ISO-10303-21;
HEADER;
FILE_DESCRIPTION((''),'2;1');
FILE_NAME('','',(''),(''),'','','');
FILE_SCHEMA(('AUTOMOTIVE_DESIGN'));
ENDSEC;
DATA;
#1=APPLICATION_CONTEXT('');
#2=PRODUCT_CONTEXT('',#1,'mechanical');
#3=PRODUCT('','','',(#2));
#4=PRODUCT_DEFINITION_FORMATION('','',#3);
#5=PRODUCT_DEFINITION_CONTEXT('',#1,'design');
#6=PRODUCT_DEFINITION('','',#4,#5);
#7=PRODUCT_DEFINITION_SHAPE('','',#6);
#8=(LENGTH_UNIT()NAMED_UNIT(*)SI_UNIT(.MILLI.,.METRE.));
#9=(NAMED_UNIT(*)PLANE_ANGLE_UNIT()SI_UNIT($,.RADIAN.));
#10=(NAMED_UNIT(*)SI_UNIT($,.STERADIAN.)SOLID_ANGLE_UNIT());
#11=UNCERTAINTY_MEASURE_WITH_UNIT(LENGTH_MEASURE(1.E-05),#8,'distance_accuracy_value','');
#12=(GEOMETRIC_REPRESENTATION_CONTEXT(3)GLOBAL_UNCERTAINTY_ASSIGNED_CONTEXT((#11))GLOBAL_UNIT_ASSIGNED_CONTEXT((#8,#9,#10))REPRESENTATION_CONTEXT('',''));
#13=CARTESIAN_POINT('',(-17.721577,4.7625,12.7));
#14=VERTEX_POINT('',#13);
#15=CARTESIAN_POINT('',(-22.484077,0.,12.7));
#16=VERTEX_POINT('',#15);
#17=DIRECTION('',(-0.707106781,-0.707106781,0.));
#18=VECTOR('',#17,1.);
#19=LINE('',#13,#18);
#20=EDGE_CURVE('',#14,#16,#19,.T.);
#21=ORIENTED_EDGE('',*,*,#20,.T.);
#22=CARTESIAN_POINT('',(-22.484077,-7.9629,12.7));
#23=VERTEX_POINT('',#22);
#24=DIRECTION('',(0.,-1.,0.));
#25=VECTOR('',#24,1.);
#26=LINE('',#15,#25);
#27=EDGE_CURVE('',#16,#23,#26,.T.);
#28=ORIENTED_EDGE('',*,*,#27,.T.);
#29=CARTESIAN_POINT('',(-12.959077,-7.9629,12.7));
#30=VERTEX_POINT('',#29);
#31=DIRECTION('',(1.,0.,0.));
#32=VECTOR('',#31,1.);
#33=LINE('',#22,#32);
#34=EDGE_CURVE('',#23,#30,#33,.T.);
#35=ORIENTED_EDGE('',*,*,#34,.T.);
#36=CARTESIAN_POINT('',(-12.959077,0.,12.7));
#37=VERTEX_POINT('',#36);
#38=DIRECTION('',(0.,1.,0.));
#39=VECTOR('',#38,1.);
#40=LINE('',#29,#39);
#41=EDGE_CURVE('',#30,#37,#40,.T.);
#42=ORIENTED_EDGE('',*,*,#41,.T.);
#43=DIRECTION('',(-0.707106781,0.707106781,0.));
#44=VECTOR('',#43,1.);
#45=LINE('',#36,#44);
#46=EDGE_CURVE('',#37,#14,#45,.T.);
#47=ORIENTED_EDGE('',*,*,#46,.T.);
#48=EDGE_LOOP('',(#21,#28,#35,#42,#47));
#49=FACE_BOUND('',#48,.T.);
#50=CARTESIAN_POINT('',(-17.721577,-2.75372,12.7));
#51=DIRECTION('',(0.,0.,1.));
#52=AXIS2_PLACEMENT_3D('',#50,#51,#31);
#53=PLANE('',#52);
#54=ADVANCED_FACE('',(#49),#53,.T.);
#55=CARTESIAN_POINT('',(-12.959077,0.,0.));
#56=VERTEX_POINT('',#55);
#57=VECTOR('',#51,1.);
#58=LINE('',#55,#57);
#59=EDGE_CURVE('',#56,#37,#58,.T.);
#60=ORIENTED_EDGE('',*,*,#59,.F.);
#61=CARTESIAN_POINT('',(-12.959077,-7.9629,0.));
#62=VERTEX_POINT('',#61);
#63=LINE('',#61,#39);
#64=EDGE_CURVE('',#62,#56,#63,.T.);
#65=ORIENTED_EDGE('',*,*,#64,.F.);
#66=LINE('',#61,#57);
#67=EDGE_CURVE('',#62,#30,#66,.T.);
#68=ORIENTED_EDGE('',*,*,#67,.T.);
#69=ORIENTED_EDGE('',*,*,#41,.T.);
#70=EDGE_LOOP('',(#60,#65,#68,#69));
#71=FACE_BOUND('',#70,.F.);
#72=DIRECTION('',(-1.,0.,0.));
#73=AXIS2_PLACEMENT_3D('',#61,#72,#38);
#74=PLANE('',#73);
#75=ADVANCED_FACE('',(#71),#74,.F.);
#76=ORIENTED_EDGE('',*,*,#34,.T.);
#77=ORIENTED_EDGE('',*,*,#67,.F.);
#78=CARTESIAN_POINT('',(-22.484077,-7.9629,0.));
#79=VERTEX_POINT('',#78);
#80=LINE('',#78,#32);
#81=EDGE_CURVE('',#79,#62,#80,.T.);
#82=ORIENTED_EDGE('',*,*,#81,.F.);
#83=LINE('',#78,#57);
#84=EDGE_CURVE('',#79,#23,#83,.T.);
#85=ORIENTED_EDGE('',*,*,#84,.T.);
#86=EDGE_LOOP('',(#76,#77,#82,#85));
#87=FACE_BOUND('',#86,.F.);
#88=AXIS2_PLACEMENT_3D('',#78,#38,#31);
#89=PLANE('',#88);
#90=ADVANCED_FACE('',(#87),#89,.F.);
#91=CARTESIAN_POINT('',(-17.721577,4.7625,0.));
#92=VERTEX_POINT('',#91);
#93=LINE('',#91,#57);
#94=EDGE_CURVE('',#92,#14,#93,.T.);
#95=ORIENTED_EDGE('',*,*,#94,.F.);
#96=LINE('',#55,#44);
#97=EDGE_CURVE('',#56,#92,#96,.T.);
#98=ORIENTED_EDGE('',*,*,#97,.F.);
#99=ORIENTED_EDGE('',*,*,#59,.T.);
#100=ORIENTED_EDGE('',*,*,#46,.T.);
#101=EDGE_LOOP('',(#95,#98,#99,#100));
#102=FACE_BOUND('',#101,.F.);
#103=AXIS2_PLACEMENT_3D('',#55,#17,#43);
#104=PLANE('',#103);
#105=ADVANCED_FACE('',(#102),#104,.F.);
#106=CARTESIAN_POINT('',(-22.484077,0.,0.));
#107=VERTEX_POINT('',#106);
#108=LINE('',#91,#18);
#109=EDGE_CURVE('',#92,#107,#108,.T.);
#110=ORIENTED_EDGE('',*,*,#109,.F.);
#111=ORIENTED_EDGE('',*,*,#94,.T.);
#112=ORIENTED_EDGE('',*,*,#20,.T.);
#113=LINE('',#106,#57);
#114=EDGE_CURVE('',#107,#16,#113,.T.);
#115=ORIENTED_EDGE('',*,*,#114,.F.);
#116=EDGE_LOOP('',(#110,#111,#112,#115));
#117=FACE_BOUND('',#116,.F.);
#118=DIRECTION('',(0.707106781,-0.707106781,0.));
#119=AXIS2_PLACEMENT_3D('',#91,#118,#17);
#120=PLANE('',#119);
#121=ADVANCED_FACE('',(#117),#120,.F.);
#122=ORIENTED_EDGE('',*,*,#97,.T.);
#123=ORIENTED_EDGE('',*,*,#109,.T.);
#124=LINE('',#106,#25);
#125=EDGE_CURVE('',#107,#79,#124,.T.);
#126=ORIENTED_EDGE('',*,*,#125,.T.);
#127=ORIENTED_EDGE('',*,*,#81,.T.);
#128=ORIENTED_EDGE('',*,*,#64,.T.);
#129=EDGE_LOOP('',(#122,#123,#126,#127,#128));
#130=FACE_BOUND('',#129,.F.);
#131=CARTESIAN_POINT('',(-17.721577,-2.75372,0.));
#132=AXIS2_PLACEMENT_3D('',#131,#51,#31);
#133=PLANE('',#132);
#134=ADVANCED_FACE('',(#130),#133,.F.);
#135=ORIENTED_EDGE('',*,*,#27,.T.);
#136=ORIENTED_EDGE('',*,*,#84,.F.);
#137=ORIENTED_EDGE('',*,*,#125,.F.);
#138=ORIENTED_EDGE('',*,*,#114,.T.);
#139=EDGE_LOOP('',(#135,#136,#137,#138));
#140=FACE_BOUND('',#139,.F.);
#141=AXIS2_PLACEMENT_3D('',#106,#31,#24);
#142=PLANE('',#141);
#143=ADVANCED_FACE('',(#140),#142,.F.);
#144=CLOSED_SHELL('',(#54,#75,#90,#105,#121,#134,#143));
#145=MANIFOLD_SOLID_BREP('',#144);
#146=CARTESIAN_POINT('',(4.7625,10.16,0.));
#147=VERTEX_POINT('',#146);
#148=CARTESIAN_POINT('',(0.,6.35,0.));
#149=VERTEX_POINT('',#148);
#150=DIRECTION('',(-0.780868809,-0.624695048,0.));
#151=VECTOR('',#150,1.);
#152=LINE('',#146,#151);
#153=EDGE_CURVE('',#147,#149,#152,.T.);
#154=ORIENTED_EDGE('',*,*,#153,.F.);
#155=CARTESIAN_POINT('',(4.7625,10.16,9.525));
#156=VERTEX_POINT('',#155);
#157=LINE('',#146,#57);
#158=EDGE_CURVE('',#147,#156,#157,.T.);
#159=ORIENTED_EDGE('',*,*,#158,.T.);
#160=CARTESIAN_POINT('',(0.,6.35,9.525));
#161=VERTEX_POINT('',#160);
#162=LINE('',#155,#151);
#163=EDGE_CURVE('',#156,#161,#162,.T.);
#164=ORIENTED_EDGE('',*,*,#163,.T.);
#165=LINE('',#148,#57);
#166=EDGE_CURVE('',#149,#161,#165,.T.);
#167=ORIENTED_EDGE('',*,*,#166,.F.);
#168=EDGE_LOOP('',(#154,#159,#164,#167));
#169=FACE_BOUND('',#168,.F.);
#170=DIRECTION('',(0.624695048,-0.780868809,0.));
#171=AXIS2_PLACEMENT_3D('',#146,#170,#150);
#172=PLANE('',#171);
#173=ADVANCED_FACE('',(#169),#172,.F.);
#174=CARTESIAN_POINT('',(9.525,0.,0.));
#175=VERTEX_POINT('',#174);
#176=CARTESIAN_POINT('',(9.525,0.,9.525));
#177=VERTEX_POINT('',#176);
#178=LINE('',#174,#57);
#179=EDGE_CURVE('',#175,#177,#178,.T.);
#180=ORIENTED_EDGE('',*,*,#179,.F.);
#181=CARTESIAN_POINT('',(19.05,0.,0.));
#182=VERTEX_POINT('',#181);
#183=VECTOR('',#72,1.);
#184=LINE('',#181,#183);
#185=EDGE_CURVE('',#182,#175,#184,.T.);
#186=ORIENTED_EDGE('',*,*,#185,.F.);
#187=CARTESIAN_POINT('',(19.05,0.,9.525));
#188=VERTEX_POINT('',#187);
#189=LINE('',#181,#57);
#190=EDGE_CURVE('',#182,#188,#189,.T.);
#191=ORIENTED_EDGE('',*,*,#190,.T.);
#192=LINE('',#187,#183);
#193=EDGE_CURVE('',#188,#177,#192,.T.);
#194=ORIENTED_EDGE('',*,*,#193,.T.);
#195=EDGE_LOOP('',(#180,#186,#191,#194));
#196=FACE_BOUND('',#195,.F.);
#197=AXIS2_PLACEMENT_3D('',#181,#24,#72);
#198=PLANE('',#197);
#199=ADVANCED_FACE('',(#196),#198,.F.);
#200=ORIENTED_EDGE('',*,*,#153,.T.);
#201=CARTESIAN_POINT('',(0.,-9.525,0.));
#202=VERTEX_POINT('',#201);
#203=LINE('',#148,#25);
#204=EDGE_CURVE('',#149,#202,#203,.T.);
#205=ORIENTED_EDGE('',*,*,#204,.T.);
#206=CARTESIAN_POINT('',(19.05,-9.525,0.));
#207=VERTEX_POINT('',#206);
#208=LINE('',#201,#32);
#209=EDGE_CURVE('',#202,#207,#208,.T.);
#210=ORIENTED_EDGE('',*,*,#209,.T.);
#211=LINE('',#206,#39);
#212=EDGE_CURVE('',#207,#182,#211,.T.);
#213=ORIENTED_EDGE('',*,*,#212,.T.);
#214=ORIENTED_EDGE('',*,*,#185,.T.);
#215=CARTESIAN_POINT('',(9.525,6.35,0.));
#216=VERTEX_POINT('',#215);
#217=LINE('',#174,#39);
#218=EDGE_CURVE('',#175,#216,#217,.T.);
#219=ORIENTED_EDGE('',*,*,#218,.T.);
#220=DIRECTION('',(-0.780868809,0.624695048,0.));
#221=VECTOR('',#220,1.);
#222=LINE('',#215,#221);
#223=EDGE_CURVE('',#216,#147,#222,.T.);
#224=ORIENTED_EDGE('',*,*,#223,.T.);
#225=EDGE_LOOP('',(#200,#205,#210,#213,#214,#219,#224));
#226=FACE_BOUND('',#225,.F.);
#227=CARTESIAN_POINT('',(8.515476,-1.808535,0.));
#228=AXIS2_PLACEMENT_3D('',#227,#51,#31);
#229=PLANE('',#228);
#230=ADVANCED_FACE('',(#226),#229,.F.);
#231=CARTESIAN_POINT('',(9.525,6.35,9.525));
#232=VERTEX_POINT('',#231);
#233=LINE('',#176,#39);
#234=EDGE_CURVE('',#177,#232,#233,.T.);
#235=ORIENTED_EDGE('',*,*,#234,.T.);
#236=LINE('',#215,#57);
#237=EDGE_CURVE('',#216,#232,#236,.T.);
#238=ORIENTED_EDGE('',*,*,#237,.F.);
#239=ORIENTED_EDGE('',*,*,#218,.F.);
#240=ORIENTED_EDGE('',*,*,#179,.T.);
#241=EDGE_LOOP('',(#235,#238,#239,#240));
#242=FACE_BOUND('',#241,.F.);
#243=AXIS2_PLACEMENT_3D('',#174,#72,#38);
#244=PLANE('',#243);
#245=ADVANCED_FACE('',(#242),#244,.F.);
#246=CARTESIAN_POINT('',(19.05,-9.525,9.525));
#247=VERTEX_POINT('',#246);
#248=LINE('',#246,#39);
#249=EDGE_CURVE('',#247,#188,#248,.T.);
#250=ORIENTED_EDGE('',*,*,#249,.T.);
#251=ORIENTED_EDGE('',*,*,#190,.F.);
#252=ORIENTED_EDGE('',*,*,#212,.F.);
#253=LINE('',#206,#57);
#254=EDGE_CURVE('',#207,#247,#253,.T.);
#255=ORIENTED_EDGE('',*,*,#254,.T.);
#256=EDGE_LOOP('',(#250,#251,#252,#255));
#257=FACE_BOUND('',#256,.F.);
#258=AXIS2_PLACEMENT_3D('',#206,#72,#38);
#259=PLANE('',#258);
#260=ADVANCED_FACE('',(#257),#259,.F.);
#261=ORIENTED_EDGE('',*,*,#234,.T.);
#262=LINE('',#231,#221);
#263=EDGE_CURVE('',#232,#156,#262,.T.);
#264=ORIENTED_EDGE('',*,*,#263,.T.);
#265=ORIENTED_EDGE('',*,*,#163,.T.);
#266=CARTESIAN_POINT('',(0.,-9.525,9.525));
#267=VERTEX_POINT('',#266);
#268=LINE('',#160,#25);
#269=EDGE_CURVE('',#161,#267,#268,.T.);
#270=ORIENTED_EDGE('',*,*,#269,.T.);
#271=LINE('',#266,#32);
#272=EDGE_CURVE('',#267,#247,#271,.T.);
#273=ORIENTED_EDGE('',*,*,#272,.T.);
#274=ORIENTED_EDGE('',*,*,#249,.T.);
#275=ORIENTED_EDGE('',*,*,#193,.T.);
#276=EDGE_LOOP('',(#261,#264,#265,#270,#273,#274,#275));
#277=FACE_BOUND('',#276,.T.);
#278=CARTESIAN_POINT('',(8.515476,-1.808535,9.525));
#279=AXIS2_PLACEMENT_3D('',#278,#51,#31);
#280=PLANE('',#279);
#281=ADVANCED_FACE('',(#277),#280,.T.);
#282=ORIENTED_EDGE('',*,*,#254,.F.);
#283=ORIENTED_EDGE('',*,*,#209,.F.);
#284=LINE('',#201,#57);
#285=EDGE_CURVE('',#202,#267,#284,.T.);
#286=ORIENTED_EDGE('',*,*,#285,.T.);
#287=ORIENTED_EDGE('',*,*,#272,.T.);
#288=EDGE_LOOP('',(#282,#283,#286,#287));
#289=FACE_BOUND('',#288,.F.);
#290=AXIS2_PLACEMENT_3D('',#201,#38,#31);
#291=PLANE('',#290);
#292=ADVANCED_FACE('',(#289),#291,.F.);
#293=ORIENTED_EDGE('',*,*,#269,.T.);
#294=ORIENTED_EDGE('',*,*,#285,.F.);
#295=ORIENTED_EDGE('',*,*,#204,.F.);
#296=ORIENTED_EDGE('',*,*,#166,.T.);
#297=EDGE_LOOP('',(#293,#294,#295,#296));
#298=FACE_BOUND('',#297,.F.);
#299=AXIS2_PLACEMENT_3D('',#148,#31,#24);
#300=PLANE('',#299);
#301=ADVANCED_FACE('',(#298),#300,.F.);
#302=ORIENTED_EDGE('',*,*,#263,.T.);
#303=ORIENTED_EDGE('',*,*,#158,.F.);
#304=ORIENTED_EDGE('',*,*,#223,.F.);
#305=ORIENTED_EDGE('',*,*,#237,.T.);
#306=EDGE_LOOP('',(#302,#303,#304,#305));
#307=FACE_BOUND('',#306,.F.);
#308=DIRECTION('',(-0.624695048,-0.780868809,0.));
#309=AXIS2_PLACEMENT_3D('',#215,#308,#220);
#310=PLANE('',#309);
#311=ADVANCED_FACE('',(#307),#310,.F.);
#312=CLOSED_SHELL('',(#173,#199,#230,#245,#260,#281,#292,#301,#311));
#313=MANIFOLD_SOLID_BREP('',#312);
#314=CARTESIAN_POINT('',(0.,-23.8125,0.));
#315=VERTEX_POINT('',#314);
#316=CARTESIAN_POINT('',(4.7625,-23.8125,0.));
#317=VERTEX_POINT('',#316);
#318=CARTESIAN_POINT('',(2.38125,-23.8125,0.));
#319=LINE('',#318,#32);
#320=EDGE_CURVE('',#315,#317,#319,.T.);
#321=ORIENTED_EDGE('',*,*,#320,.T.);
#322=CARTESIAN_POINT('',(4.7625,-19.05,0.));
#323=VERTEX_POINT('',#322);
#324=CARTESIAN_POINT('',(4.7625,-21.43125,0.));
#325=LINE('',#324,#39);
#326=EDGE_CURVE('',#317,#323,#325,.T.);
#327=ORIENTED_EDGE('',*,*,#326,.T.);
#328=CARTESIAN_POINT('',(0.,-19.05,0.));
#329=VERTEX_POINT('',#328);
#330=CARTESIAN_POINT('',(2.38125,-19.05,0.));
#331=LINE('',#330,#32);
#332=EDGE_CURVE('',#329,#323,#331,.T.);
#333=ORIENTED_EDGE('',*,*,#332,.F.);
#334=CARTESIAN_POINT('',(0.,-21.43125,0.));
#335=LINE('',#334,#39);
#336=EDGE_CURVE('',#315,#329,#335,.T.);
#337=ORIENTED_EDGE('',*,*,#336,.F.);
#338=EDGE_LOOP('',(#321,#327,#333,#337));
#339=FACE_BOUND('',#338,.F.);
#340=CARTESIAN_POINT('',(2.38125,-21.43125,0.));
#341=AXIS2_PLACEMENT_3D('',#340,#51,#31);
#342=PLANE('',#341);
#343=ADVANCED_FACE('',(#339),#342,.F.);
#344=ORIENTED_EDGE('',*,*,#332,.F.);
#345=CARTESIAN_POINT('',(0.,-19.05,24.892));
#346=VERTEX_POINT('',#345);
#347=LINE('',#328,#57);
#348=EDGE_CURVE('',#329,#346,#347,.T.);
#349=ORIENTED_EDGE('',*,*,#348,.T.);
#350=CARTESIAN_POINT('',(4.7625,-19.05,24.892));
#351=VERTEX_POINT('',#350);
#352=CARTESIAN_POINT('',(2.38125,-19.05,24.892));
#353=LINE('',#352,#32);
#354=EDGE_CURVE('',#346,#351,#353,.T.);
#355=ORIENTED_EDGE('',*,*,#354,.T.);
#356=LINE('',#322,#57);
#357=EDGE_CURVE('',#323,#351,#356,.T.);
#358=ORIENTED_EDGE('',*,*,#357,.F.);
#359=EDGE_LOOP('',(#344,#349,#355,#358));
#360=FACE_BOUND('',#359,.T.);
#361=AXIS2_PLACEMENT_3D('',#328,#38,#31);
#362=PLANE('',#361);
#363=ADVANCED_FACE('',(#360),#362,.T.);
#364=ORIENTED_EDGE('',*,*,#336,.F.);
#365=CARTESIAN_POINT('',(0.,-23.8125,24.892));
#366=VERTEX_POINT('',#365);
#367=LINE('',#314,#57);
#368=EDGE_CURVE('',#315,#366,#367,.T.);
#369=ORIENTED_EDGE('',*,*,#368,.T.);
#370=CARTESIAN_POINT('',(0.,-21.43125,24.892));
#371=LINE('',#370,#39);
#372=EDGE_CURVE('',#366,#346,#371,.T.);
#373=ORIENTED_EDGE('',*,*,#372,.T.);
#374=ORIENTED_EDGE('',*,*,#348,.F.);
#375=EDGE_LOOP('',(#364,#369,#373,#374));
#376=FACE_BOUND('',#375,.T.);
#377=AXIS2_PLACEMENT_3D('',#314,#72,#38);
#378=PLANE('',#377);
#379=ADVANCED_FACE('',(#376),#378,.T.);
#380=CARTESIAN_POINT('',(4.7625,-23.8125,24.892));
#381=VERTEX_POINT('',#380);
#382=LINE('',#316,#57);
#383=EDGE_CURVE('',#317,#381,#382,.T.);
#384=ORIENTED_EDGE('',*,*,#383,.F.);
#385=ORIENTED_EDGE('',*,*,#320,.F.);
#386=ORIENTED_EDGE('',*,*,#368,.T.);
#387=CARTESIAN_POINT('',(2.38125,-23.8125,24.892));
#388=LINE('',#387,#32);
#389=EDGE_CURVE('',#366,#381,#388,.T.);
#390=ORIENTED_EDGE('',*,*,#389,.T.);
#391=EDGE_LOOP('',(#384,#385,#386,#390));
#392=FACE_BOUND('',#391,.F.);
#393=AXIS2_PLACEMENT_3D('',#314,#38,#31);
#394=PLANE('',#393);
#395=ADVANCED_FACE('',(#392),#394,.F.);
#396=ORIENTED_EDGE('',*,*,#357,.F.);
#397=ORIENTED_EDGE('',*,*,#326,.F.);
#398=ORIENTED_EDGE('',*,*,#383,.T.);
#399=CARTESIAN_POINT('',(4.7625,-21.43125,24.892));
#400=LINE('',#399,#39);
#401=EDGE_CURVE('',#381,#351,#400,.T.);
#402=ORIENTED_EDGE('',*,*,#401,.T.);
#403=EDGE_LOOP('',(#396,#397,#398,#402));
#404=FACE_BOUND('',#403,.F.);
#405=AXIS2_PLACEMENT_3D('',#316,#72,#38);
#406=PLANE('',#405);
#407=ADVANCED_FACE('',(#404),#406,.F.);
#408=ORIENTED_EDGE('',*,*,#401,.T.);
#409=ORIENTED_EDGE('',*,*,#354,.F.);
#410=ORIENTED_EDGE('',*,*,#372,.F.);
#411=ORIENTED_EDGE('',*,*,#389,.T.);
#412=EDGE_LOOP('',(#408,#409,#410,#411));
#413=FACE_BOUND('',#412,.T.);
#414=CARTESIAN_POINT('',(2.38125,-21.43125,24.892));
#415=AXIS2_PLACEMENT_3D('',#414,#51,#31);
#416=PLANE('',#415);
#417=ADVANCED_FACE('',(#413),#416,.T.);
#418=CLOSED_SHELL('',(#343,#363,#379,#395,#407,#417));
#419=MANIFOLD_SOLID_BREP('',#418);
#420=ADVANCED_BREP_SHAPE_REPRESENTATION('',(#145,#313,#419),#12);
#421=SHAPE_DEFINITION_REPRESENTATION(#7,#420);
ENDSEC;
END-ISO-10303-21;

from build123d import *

# Parameters (mm, degrees)
F1_DEPTH = 9.525
F3_DEPTH = 12.7
F4_W     = 4.7625
F4_H     = 4.7625
F5_DEPTH = 24.892


# Not quite as in the source:
# - a length typed as a fraction of an inch, garbled in the dataset ("3 / 203.2 mm" for 3/8 in), is restored


with BuildPart() as f1:
    # F0 (on Top) → F1 (new body)
    with BuildSketch(Plane.XY):
        Polygon((19.05, -9.525), (19.05, 0), (9.525, 0), (9.525, 6.35), (4.7625, 10.16), (0, 6.35), (0, 0), (0, -9.525), align=None)
    extrude(amount=F1_DEPTH)


with BuildPart() as f3:
    # F2 (on Top) → F3 (new body)
    with BuildSketch(Plane.XY):
        Polygon((-22.4840769566, 0), (-22.4840769566, -7.9629), (-12.9590769566, -7.9629), (-12.9590769566, 0), (-17.7215769566, 4.7625), align=None)
    extrude(amount=F3_DEPTH)


with BuildPart() as f5:
    # F4 (on Top) → F5 (new body)
    with BuildSketch(Plane.XY):
        with Locations((2.38125, -21.43125)):
            Rectangle(F4_W, F4_H)
    extrude(amount=F5_DEPTH)


solid = Compound([f1.part, f3.part, f5.part])
